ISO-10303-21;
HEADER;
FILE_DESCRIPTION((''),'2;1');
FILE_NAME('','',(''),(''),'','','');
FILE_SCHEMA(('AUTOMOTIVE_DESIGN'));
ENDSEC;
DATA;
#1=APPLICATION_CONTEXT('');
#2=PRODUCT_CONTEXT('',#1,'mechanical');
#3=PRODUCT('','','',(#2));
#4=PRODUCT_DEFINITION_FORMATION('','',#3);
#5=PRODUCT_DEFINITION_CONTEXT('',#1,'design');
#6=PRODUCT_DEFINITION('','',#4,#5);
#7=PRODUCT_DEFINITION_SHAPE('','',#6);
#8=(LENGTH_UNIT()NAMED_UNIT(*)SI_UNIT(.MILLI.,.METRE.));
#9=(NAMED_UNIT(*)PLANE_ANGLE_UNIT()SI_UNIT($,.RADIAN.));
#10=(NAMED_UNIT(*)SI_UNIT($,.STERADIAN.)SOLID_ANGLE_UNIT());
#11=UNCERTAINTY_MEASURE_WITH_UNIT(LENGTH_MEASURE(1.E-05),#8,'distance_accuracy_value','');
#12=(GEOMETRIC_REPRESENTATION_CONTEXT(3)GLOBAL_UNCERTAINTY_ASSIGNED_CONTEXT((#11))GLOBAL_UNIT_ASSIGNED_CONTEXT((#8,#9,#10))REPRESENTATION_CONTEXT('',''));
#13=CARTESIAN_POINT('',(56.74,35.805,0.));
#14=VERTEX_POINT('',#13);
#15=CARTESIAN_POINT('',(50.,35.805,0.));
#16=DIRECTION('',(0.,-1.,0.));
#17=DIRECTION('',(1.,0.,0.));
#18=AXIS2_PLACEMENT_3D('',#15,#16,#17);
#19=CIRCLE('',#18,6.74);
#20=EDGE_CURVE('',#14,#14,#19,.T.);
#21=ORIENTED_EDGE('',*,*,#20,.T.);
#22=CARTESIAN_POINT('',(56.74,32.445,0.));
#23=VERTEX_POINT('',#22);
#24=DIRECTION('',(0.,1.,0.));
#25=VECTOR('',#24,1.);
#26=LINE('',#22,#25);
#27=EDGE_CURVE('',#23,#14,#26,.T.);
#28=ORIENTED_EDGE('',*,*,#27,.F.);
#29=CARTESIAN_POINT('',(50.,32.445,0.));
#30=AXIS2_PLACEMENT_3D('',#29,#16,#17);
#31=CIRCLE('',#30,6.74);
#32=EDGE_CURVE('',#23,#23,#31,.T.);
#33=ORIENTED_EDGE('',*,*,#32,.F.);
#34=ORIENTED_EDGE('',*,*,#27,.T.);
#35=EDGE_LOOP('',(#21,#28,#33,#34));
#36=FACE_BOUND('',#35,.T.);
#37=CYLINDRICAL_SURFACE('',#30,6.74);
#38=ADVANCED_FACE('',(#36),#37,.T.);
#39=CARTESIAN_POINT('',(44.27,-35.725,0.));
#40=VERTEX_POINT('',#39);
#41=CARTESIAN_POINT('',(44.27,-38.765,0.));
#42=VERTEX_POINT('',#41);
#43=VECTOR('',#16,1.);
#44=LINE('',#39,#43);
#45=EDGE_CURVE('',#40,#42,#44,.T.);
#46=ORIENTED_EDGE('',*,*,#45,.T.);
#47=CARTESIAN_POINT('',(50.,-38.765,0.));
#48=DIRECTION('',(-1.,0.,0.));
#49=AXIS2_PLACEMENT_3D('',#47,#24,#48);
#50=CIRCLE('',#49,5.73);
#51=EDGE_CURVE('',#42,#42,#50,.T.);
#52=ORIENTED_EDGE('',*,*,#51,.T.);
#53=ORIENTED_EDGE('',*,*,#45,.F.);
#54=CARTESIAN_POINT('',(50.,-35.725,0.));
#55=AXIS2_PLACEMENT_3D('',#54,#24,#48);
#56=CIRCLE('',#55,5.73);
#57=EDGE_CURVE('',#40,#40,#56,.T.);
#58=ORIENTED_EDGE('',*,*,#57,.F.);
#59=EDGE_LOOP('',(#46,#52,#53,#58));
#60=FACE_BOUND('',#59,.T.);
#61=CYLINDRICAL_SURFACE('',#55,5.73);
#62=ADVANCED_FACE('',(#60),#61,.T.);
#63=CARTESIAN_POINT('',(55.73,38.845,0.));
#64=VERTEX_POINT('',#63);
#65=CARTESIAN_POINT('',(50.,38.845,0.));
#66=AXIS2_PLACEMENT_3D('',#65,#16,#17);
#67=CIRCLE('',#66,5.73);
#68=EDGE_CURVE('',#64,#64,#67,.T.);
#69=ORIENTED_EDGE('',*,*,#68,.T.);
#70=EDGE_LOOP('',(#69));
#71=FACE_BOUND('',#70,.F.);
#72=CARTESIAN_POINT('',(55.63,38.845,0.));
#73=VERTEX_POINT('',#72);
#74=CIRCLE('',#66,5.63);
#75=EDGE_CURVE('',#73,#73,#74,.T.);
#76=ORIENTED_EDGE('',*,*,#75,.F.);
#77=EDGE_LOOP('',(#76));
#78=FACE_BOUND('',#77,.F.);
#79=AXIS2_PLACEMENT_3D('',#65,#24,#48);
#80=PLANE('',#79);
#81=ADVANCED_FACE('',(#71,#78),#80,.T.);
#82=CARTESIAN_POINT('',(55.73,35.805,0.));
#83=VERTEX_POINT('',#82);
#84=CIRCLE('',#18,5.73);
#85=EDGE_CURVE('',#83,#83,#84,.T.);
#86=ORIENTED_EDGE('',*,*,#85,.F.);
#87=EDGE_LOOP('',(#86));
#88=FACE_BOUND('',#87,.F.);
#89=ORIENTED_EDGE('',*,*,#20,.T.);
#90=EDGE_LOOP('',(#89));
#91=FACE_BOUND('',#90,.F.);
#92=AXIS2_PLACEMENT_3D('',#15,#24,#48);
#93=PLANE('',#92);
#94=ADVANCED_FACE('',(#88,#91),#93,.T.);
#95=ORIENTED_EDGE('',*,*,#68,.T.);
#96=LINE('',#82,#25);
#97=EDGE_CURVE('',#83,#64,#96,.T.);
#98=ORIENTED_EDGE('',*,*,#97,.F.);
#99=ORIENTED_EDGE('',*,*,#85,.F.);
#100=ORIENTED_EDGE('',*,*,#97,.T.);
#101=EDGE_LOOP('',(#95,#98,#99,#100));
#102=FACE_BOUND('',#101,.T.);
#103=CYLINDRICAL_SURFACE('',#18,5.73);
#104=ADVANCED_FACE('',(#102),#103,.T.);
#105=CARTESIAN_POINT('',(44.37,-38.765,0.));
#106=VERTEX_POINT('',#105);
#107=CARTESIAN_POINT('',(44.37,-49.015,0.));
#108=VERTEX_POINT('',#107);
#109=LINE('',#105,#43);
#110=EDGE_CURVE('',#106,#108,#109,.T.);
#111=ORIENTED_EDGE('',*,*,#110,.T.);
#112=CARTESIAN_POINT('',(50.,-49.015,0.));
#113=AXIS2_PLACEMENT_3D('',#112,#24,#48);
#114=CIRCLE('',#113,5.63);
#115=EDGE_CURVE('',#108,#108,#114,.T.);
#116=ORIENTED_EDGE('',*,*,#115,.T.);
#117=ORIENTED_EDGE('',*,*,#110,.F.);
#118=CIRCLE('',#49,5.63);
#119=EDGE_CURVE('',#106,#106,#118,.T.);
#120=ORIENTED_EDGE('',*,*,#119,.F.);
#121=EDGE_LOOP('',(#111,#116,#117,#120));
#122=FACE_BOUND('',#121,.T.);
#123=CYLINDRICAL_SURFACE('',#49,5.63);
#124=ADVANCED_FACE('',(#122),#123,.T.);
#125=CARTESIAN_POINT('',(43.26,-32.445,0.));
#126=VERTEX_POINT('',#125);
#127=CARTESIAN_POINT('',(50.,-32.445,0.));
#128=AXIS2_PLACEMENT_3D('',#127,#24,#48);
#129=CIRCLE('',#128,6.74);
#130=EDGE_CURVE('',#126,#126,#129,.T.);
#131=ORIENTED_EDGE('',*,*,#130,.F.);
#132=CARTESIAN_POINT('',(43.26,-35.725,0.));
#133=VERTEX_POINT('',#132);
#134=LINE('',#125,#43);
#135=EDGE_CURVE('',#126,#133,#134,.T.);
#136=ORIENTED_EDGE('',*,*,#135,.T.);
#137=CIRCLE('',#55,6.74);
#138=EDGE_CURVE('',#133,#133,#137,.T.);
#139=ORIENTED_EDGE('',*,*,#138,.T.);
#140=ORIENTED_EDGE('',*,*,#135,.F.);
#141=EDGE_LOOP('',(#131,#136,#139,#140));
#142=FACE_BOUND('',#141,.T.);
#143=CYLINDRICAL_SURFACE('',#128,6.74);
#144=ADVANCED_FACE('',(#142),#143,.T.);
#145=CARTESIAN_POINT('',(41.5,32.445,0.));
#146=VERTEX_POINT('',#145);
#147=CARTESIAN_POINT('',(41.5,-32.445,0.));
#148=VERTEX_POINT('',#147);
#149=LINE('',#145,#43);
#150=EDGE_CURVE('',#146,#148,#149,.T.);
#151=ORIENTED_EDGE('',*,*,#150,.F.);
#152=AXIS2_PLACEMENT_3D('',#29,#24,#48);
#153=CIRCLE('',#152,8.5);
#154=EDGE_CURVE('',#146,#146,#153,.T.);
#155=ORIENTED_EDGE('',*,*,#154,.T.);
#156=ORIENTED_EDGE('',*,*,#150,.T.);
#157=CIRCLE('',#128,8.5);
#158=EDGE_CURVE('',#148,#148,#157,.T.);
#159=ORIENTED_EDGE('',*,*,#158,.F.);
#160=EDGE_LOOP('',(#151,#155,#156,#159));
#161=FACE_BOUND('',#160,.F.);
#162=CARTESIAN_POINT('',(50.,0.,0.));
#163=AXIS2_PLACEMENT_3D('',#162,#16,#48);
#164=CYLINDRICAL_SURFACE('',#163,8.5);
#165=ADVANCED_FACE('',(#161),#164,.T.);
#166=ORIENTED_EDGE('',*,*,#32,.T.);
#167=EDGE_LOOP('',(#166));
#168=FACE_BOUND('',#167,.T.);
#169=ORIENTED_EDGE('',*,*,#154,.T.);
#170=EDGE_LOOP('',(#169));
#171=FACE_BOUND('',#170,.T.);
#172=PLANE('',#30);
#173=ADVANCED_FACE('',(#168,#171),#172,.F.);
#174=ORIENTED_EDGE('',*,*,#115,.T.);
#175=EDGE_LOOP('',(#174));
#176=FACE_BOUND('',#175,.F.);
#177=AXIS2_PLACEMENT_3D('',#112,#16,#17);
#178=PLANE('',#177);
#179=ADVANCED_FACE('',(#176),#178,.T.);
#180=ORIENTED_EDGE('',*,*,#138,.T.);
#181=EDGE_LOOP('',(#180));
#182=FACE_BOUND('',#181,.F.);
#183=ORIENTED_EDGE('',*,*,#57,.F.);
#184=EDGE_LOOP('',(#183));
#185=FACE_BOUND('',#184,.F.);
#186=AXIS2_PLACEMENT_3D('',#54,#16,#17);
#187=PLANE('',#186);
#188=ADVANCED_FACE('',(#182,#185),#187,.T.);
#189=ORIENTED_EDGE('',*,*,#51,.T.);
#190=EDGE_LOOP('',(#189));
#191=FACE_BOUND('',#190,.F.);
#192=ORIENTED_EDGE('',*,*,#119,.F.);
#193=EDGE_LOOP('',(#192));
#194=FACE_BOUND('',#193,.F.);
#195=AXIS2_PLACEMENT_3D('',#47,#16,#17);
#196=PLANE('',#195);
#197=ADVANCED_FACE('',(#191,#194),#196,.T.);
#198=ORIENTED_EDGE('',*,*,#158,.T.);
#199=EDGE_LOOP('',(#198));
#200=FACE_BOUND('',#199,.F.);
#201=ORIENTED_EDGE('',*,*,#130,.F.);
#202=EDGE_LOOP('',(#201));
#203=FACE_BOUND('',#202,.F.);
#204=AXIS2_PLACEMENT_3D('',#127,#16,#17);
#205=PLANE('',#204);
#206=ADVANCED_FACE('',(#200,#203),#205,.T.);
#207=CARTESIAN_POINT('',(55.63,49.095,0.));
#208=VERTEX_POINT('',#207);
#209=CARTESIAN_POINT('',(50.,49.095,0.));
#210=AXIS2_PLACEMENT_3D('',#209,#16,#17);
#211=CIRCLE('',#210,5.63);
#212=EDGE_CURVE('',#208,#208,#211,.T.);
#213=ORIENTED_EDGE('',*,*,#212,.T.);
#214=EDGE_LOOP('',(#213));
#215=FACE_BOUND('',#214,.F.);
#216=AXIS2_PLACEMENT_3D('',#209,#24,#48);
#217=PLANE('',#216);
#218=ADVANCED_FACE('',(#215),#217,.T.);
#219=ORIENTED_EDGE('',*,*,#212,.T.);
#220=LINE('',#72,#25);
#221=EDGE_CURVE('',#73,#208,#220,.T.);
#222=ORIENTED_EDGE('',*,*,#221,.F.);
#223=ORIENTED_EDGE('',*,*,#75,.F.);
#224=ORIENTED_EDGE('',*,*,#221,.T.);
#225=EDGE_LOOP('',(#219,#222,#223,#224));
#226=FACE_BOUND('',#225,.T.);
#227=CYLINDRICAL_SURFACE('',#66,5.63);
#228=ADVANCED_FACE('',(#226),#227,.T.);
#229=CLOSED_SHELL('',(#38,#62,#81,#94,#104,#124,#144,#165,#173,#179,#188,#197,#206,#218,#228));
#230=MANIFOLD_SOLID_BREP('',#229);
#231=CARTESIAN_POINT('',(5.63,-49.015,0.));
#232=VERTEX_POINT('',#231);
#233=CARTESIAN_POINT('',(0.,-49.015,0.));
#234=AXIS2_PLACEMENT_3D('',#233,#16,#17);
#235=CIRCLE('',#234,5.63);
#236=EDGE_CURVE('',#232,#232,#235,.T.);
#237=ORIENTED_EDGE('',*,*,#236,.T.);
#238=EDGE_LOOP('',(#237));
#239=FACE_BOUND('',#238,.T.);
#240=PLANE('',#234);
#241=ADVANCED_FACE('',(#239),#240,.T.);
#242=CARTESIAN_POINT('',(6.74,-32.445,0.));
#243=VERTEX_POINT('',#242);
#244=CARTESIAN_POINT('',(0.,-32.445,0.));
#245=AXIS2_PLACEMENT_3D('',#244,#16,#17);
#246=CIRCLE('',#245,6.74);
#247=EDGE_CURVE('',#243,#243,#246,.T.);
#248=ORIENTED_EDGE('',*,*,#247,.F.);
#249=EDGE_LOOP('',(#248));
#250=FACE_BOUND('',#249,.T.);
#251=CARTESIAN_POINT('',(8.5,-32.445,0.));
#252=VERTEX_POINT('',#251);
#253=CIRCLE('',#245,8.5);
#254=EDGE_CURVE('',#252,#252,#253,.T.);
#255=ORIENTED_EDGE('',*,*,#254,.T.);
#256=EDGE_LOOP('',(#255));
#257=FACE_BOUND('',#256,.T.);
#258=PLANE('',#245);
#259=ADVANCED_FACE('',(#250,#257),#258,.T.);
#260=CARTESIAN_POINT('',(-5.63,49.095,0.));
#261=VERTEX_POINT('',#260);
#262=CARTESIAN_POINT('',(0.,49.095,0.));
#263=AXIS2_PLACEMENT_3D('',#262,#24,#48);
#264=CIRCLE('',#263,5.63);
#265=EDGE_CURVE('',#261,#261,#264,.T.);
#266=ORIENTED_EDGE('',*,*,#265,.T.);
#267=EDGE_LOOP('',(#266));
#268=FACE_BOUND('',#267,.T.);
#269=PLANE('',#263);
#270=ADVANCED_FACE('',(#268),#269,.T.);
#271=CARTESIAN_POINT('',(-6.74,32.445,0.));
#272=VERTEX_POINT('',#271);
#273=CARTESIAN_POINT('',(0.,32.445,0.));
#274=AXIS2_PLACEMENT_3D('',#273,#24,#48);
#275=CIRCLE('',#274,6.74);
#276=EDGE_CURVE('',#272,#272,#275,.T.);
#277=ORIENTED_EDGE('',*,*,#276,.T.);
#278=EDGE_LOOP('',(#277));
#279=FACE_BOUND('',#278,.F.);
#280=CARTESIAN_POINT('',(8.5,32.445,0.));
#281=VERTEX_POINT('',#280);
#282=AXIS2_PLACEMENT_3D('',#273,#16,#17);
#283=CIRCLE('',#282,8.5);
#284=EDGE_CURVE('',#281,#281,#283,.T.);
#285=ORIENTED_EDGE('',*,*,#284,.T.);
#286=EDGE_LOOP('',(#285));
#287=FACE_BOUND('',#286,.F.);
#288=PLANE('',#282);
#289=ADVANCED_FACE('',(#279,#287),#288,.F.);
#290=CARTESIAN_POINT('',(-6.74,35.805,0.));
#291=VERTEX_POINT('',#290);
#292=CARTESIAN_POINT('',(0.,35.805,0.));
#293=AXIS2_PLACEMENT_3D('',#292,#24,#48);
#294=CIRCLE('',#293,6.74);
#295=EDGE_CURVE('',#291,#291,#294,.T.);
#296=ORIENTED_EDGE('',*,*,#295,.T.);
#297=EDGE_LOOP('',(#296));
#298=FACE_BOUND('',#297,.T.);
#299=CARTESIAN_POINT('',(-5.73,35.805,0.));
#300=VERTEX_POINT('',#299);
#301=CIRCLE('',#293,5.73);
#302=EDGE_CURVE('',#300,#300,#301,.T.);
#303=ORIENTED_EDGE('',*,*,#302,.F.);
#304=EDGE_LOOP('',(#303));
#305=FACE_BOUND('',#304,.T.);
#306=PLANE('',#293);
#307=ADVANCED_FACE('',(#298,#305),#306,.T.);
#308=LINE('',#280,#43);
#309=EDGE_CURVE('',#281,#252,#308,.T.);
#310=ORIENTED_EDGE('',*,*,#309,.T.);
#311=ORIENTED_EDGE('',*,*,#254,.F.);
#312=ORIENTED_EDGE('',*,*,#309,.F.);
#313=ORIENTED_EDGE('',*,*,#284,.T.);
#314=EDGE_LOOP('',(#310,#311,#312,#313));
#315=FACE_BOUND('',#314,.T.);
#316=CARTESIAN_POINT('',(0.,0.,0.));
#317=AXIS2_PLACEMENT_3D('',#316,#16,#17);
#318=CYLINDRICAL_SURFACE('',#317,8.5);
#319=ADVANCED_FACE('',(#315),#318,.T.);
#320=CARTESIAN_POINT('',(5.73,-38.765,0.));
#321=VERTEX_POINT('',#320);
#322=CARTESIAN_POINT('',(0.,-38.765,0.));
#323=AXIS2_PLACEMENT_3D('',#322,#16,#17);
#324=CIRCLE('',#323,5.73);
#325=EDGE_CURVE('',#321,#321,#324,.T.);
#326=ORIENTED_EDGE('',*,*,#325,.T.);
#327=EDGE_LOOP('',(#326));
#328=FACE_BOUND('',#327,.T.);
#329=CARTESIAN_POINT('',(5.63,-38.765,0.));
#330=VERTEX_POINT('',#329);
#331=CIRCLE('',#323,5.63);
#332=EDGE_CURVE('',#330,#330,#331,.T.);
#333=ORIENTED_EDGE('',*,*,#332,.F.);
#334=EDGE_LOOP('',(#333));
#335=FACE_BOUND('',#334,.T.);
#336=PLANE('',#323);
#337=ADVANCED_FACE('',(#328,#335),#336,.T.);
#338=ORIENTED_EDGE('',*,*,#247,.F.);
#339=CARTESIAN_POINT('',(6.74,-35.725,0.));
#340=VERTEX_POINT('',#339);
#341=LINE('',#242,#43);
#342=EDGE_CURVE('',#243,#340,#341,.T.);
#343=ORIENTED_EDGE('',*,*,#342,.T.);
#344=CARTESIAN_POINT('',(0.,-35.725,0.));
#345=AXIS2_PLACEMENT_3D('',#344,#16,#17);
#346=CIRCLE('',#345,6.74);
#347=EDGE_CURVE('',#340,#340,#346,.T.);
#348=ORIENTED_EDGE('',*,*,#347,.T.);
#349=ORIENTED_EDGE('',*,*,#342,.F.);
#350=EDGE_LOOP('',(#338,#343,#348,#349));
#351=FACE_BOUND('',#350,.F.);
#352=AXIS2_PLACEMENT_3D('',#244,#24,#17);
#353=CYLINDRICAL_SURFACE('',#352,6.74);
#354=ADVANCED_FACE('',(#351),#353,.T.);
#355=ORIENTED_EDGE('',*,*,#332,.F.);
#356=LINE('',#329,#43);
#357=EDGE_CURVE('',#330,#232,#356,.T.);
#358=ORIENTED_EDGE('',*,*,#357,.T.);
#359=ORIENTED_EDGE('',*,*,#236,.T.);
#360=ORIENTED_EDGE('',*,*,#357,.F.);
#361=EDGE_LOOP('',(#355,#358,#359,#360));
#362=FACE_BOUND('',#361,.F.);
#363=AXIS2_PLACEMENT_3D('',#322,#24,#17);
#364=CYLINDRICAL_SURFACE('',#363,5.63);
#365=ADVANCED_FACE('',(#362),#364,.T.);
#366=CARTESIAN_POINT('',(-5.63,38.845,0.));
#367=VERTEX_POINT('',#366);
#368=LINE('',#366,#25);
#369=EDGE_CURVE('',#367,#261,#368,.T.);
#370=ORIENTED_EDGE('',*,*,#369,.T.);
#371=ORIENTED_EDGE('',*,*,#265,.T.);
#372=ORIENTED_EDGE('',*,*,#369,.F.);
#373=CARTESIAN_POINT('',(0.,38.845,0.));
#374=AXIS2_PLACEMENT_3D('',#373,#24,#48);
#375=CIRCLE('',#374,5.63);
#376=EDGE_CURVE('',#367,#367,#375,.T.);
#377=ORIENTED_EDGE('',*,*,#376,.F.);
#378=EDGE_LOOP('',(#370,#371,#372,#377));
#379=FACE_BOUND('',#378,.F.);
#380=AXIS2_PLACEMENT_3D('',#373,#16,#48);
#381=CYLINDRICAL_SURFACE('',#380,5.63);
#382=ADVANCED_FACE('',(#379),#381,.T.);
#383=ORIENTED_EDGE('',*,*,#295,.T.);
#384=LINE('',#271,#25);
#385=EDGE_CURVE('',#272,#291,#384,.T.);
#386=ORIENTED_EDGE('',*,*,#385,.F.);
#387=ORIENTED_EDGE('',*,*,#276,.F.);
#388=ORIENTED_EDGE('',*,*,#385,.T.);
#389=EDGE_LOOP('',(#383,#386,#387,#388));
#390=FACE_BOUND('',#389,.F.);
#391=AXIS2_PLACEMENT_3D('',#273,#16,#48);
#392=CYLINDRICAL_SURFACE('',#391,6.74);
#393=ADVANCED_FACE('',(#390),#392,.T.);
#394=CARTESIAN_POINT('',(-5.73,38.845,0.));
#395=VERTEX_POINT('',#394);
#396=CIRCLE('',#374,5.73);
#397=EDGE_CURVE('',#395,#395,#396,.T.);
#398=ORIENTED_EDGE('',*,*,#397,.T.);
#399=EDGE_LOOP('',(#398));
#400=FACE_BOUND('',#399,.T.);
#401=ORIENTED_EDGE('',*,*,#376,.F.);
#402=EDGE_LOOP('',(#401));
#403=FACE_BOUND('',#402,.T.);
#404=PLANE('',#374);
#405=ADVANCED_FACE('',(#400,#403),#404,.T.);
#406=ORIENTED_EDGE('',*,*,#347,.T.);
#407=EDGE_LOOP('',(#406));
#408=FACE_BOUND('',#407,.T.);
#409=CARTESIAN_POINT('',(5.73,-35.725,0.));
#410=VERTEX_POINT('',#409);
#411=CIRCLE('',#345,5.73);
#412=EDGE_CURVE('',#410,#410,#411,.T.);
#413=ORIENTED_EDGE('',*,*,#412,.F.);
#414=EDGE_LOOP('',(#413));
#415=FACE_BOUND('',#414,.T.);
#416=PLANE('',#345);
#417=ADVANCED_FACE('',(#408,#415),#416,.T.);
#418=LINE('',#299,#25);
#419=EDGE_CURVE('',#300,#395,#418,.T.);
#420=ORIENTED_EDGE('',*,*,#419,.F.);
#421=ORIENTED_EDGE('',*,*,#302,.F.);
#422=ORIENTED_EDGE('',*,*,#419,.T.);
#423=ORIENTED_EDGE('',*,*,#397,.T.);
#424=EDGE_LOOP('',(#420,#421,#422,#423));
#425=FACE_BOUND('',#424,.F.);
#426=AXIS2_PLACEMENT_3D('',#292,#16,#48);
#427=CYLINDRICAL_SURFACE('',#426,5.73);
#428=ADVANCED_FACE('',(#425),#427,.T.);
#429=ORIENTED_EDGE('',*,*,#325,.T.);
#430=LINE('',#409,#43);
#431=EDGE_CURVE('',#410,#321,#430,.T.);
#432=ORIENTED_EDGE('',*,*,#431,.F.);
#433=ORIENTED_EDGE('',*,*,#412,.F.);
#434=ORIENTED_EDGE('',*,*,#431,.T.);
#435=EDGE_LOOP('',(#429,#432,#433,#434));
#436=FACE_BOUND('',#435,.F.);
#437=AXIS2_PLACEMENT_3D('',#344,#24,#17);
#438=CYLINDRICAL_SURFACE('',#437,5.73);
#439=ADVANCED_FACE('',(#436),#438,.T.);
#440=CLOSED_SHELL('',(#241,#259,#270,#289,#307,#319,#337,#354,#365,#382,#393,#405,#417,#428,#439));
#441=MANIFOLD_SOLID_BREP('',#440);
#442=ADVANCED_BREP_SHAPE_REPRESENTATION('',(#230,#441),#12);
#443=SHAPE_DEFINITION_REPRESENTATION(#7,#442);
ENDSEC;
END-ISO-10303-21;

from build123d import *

# Parameters (mm, degrees)
F0_R      = 8.5
F1_DEPTH  = 32.445
F2_R      = 6.74
F3_DEPTH  = 3.28
F4_R      = 5.73
F5_DEPTH  = 3.04
F6_R      = 5.63
F7_DEPTH  = 10.25
F8_R      = 6.74
F9_DEPTH  = 3.36
F10_R     = 5.73
F11_DEPTH = 3.04
F12_R     = 5.63
F13_DEPTH = 10.25


with BuildPart() as f1:
    # F0 (on Front) → F1 (new body, symmetric)
    with BuildSketch(Plane.XZ):
        Circle(F0_R)
    extrude(amount=F1_DEPTH, both=True)

    # F2 (on face) → F3 (join)
    with BuildSketch(Plane.XZ.offset(32.445)):
        Circle(F2_R)
    extrude(amount=F3_DEPTH)

    # F4 (on face) → F5 (join)
    with BuildSketch(Plane.XZ.offset(35.725)):
        Circle(F4_R)
    extrude(amount=F5_DEPTH)

    # F6 (on face) → F7 (join)
    with BuildSketch(Plane.XZ.offset(38.765)):
        Circle(F6_R)
    extrude(amount=F7_DEPTH)

    # F8 (on face) → F9 (join)
    with BuildSketch(Plane(origin=(0, 32.445, 0), x_dir=(-1, 0, 0), z_dir=(0, 1, 0))):
        Circle(F8_R)
    extrude(amount=F9_DEPTH)

    # F10 (on face) → F11 (join)
    with BuildSketch(Plane(origin=(0, 35.805, 0), x_dir=(-1, 0, 0), z_dir=(0, 1, 0))):
        Circle(F10_R)
    extrude(amount=F11_DEPTH)

    # F12 (on face) → F13 (join)
    with BuildSketch(Plane(origin=(0, 38.845, 0), x_dir=(-1, 0, 0), z_dir=(0, 1, 0))):
        Circle(F12_R)
    extrude(amount=F13_DEPTH)


with BuildPart() as f15_1:
    # F15: instance of F1
    add(f1.part.mirror(Plane.YZ.offset(25)))


solid = Compound([f1.part, f15_1.part])
